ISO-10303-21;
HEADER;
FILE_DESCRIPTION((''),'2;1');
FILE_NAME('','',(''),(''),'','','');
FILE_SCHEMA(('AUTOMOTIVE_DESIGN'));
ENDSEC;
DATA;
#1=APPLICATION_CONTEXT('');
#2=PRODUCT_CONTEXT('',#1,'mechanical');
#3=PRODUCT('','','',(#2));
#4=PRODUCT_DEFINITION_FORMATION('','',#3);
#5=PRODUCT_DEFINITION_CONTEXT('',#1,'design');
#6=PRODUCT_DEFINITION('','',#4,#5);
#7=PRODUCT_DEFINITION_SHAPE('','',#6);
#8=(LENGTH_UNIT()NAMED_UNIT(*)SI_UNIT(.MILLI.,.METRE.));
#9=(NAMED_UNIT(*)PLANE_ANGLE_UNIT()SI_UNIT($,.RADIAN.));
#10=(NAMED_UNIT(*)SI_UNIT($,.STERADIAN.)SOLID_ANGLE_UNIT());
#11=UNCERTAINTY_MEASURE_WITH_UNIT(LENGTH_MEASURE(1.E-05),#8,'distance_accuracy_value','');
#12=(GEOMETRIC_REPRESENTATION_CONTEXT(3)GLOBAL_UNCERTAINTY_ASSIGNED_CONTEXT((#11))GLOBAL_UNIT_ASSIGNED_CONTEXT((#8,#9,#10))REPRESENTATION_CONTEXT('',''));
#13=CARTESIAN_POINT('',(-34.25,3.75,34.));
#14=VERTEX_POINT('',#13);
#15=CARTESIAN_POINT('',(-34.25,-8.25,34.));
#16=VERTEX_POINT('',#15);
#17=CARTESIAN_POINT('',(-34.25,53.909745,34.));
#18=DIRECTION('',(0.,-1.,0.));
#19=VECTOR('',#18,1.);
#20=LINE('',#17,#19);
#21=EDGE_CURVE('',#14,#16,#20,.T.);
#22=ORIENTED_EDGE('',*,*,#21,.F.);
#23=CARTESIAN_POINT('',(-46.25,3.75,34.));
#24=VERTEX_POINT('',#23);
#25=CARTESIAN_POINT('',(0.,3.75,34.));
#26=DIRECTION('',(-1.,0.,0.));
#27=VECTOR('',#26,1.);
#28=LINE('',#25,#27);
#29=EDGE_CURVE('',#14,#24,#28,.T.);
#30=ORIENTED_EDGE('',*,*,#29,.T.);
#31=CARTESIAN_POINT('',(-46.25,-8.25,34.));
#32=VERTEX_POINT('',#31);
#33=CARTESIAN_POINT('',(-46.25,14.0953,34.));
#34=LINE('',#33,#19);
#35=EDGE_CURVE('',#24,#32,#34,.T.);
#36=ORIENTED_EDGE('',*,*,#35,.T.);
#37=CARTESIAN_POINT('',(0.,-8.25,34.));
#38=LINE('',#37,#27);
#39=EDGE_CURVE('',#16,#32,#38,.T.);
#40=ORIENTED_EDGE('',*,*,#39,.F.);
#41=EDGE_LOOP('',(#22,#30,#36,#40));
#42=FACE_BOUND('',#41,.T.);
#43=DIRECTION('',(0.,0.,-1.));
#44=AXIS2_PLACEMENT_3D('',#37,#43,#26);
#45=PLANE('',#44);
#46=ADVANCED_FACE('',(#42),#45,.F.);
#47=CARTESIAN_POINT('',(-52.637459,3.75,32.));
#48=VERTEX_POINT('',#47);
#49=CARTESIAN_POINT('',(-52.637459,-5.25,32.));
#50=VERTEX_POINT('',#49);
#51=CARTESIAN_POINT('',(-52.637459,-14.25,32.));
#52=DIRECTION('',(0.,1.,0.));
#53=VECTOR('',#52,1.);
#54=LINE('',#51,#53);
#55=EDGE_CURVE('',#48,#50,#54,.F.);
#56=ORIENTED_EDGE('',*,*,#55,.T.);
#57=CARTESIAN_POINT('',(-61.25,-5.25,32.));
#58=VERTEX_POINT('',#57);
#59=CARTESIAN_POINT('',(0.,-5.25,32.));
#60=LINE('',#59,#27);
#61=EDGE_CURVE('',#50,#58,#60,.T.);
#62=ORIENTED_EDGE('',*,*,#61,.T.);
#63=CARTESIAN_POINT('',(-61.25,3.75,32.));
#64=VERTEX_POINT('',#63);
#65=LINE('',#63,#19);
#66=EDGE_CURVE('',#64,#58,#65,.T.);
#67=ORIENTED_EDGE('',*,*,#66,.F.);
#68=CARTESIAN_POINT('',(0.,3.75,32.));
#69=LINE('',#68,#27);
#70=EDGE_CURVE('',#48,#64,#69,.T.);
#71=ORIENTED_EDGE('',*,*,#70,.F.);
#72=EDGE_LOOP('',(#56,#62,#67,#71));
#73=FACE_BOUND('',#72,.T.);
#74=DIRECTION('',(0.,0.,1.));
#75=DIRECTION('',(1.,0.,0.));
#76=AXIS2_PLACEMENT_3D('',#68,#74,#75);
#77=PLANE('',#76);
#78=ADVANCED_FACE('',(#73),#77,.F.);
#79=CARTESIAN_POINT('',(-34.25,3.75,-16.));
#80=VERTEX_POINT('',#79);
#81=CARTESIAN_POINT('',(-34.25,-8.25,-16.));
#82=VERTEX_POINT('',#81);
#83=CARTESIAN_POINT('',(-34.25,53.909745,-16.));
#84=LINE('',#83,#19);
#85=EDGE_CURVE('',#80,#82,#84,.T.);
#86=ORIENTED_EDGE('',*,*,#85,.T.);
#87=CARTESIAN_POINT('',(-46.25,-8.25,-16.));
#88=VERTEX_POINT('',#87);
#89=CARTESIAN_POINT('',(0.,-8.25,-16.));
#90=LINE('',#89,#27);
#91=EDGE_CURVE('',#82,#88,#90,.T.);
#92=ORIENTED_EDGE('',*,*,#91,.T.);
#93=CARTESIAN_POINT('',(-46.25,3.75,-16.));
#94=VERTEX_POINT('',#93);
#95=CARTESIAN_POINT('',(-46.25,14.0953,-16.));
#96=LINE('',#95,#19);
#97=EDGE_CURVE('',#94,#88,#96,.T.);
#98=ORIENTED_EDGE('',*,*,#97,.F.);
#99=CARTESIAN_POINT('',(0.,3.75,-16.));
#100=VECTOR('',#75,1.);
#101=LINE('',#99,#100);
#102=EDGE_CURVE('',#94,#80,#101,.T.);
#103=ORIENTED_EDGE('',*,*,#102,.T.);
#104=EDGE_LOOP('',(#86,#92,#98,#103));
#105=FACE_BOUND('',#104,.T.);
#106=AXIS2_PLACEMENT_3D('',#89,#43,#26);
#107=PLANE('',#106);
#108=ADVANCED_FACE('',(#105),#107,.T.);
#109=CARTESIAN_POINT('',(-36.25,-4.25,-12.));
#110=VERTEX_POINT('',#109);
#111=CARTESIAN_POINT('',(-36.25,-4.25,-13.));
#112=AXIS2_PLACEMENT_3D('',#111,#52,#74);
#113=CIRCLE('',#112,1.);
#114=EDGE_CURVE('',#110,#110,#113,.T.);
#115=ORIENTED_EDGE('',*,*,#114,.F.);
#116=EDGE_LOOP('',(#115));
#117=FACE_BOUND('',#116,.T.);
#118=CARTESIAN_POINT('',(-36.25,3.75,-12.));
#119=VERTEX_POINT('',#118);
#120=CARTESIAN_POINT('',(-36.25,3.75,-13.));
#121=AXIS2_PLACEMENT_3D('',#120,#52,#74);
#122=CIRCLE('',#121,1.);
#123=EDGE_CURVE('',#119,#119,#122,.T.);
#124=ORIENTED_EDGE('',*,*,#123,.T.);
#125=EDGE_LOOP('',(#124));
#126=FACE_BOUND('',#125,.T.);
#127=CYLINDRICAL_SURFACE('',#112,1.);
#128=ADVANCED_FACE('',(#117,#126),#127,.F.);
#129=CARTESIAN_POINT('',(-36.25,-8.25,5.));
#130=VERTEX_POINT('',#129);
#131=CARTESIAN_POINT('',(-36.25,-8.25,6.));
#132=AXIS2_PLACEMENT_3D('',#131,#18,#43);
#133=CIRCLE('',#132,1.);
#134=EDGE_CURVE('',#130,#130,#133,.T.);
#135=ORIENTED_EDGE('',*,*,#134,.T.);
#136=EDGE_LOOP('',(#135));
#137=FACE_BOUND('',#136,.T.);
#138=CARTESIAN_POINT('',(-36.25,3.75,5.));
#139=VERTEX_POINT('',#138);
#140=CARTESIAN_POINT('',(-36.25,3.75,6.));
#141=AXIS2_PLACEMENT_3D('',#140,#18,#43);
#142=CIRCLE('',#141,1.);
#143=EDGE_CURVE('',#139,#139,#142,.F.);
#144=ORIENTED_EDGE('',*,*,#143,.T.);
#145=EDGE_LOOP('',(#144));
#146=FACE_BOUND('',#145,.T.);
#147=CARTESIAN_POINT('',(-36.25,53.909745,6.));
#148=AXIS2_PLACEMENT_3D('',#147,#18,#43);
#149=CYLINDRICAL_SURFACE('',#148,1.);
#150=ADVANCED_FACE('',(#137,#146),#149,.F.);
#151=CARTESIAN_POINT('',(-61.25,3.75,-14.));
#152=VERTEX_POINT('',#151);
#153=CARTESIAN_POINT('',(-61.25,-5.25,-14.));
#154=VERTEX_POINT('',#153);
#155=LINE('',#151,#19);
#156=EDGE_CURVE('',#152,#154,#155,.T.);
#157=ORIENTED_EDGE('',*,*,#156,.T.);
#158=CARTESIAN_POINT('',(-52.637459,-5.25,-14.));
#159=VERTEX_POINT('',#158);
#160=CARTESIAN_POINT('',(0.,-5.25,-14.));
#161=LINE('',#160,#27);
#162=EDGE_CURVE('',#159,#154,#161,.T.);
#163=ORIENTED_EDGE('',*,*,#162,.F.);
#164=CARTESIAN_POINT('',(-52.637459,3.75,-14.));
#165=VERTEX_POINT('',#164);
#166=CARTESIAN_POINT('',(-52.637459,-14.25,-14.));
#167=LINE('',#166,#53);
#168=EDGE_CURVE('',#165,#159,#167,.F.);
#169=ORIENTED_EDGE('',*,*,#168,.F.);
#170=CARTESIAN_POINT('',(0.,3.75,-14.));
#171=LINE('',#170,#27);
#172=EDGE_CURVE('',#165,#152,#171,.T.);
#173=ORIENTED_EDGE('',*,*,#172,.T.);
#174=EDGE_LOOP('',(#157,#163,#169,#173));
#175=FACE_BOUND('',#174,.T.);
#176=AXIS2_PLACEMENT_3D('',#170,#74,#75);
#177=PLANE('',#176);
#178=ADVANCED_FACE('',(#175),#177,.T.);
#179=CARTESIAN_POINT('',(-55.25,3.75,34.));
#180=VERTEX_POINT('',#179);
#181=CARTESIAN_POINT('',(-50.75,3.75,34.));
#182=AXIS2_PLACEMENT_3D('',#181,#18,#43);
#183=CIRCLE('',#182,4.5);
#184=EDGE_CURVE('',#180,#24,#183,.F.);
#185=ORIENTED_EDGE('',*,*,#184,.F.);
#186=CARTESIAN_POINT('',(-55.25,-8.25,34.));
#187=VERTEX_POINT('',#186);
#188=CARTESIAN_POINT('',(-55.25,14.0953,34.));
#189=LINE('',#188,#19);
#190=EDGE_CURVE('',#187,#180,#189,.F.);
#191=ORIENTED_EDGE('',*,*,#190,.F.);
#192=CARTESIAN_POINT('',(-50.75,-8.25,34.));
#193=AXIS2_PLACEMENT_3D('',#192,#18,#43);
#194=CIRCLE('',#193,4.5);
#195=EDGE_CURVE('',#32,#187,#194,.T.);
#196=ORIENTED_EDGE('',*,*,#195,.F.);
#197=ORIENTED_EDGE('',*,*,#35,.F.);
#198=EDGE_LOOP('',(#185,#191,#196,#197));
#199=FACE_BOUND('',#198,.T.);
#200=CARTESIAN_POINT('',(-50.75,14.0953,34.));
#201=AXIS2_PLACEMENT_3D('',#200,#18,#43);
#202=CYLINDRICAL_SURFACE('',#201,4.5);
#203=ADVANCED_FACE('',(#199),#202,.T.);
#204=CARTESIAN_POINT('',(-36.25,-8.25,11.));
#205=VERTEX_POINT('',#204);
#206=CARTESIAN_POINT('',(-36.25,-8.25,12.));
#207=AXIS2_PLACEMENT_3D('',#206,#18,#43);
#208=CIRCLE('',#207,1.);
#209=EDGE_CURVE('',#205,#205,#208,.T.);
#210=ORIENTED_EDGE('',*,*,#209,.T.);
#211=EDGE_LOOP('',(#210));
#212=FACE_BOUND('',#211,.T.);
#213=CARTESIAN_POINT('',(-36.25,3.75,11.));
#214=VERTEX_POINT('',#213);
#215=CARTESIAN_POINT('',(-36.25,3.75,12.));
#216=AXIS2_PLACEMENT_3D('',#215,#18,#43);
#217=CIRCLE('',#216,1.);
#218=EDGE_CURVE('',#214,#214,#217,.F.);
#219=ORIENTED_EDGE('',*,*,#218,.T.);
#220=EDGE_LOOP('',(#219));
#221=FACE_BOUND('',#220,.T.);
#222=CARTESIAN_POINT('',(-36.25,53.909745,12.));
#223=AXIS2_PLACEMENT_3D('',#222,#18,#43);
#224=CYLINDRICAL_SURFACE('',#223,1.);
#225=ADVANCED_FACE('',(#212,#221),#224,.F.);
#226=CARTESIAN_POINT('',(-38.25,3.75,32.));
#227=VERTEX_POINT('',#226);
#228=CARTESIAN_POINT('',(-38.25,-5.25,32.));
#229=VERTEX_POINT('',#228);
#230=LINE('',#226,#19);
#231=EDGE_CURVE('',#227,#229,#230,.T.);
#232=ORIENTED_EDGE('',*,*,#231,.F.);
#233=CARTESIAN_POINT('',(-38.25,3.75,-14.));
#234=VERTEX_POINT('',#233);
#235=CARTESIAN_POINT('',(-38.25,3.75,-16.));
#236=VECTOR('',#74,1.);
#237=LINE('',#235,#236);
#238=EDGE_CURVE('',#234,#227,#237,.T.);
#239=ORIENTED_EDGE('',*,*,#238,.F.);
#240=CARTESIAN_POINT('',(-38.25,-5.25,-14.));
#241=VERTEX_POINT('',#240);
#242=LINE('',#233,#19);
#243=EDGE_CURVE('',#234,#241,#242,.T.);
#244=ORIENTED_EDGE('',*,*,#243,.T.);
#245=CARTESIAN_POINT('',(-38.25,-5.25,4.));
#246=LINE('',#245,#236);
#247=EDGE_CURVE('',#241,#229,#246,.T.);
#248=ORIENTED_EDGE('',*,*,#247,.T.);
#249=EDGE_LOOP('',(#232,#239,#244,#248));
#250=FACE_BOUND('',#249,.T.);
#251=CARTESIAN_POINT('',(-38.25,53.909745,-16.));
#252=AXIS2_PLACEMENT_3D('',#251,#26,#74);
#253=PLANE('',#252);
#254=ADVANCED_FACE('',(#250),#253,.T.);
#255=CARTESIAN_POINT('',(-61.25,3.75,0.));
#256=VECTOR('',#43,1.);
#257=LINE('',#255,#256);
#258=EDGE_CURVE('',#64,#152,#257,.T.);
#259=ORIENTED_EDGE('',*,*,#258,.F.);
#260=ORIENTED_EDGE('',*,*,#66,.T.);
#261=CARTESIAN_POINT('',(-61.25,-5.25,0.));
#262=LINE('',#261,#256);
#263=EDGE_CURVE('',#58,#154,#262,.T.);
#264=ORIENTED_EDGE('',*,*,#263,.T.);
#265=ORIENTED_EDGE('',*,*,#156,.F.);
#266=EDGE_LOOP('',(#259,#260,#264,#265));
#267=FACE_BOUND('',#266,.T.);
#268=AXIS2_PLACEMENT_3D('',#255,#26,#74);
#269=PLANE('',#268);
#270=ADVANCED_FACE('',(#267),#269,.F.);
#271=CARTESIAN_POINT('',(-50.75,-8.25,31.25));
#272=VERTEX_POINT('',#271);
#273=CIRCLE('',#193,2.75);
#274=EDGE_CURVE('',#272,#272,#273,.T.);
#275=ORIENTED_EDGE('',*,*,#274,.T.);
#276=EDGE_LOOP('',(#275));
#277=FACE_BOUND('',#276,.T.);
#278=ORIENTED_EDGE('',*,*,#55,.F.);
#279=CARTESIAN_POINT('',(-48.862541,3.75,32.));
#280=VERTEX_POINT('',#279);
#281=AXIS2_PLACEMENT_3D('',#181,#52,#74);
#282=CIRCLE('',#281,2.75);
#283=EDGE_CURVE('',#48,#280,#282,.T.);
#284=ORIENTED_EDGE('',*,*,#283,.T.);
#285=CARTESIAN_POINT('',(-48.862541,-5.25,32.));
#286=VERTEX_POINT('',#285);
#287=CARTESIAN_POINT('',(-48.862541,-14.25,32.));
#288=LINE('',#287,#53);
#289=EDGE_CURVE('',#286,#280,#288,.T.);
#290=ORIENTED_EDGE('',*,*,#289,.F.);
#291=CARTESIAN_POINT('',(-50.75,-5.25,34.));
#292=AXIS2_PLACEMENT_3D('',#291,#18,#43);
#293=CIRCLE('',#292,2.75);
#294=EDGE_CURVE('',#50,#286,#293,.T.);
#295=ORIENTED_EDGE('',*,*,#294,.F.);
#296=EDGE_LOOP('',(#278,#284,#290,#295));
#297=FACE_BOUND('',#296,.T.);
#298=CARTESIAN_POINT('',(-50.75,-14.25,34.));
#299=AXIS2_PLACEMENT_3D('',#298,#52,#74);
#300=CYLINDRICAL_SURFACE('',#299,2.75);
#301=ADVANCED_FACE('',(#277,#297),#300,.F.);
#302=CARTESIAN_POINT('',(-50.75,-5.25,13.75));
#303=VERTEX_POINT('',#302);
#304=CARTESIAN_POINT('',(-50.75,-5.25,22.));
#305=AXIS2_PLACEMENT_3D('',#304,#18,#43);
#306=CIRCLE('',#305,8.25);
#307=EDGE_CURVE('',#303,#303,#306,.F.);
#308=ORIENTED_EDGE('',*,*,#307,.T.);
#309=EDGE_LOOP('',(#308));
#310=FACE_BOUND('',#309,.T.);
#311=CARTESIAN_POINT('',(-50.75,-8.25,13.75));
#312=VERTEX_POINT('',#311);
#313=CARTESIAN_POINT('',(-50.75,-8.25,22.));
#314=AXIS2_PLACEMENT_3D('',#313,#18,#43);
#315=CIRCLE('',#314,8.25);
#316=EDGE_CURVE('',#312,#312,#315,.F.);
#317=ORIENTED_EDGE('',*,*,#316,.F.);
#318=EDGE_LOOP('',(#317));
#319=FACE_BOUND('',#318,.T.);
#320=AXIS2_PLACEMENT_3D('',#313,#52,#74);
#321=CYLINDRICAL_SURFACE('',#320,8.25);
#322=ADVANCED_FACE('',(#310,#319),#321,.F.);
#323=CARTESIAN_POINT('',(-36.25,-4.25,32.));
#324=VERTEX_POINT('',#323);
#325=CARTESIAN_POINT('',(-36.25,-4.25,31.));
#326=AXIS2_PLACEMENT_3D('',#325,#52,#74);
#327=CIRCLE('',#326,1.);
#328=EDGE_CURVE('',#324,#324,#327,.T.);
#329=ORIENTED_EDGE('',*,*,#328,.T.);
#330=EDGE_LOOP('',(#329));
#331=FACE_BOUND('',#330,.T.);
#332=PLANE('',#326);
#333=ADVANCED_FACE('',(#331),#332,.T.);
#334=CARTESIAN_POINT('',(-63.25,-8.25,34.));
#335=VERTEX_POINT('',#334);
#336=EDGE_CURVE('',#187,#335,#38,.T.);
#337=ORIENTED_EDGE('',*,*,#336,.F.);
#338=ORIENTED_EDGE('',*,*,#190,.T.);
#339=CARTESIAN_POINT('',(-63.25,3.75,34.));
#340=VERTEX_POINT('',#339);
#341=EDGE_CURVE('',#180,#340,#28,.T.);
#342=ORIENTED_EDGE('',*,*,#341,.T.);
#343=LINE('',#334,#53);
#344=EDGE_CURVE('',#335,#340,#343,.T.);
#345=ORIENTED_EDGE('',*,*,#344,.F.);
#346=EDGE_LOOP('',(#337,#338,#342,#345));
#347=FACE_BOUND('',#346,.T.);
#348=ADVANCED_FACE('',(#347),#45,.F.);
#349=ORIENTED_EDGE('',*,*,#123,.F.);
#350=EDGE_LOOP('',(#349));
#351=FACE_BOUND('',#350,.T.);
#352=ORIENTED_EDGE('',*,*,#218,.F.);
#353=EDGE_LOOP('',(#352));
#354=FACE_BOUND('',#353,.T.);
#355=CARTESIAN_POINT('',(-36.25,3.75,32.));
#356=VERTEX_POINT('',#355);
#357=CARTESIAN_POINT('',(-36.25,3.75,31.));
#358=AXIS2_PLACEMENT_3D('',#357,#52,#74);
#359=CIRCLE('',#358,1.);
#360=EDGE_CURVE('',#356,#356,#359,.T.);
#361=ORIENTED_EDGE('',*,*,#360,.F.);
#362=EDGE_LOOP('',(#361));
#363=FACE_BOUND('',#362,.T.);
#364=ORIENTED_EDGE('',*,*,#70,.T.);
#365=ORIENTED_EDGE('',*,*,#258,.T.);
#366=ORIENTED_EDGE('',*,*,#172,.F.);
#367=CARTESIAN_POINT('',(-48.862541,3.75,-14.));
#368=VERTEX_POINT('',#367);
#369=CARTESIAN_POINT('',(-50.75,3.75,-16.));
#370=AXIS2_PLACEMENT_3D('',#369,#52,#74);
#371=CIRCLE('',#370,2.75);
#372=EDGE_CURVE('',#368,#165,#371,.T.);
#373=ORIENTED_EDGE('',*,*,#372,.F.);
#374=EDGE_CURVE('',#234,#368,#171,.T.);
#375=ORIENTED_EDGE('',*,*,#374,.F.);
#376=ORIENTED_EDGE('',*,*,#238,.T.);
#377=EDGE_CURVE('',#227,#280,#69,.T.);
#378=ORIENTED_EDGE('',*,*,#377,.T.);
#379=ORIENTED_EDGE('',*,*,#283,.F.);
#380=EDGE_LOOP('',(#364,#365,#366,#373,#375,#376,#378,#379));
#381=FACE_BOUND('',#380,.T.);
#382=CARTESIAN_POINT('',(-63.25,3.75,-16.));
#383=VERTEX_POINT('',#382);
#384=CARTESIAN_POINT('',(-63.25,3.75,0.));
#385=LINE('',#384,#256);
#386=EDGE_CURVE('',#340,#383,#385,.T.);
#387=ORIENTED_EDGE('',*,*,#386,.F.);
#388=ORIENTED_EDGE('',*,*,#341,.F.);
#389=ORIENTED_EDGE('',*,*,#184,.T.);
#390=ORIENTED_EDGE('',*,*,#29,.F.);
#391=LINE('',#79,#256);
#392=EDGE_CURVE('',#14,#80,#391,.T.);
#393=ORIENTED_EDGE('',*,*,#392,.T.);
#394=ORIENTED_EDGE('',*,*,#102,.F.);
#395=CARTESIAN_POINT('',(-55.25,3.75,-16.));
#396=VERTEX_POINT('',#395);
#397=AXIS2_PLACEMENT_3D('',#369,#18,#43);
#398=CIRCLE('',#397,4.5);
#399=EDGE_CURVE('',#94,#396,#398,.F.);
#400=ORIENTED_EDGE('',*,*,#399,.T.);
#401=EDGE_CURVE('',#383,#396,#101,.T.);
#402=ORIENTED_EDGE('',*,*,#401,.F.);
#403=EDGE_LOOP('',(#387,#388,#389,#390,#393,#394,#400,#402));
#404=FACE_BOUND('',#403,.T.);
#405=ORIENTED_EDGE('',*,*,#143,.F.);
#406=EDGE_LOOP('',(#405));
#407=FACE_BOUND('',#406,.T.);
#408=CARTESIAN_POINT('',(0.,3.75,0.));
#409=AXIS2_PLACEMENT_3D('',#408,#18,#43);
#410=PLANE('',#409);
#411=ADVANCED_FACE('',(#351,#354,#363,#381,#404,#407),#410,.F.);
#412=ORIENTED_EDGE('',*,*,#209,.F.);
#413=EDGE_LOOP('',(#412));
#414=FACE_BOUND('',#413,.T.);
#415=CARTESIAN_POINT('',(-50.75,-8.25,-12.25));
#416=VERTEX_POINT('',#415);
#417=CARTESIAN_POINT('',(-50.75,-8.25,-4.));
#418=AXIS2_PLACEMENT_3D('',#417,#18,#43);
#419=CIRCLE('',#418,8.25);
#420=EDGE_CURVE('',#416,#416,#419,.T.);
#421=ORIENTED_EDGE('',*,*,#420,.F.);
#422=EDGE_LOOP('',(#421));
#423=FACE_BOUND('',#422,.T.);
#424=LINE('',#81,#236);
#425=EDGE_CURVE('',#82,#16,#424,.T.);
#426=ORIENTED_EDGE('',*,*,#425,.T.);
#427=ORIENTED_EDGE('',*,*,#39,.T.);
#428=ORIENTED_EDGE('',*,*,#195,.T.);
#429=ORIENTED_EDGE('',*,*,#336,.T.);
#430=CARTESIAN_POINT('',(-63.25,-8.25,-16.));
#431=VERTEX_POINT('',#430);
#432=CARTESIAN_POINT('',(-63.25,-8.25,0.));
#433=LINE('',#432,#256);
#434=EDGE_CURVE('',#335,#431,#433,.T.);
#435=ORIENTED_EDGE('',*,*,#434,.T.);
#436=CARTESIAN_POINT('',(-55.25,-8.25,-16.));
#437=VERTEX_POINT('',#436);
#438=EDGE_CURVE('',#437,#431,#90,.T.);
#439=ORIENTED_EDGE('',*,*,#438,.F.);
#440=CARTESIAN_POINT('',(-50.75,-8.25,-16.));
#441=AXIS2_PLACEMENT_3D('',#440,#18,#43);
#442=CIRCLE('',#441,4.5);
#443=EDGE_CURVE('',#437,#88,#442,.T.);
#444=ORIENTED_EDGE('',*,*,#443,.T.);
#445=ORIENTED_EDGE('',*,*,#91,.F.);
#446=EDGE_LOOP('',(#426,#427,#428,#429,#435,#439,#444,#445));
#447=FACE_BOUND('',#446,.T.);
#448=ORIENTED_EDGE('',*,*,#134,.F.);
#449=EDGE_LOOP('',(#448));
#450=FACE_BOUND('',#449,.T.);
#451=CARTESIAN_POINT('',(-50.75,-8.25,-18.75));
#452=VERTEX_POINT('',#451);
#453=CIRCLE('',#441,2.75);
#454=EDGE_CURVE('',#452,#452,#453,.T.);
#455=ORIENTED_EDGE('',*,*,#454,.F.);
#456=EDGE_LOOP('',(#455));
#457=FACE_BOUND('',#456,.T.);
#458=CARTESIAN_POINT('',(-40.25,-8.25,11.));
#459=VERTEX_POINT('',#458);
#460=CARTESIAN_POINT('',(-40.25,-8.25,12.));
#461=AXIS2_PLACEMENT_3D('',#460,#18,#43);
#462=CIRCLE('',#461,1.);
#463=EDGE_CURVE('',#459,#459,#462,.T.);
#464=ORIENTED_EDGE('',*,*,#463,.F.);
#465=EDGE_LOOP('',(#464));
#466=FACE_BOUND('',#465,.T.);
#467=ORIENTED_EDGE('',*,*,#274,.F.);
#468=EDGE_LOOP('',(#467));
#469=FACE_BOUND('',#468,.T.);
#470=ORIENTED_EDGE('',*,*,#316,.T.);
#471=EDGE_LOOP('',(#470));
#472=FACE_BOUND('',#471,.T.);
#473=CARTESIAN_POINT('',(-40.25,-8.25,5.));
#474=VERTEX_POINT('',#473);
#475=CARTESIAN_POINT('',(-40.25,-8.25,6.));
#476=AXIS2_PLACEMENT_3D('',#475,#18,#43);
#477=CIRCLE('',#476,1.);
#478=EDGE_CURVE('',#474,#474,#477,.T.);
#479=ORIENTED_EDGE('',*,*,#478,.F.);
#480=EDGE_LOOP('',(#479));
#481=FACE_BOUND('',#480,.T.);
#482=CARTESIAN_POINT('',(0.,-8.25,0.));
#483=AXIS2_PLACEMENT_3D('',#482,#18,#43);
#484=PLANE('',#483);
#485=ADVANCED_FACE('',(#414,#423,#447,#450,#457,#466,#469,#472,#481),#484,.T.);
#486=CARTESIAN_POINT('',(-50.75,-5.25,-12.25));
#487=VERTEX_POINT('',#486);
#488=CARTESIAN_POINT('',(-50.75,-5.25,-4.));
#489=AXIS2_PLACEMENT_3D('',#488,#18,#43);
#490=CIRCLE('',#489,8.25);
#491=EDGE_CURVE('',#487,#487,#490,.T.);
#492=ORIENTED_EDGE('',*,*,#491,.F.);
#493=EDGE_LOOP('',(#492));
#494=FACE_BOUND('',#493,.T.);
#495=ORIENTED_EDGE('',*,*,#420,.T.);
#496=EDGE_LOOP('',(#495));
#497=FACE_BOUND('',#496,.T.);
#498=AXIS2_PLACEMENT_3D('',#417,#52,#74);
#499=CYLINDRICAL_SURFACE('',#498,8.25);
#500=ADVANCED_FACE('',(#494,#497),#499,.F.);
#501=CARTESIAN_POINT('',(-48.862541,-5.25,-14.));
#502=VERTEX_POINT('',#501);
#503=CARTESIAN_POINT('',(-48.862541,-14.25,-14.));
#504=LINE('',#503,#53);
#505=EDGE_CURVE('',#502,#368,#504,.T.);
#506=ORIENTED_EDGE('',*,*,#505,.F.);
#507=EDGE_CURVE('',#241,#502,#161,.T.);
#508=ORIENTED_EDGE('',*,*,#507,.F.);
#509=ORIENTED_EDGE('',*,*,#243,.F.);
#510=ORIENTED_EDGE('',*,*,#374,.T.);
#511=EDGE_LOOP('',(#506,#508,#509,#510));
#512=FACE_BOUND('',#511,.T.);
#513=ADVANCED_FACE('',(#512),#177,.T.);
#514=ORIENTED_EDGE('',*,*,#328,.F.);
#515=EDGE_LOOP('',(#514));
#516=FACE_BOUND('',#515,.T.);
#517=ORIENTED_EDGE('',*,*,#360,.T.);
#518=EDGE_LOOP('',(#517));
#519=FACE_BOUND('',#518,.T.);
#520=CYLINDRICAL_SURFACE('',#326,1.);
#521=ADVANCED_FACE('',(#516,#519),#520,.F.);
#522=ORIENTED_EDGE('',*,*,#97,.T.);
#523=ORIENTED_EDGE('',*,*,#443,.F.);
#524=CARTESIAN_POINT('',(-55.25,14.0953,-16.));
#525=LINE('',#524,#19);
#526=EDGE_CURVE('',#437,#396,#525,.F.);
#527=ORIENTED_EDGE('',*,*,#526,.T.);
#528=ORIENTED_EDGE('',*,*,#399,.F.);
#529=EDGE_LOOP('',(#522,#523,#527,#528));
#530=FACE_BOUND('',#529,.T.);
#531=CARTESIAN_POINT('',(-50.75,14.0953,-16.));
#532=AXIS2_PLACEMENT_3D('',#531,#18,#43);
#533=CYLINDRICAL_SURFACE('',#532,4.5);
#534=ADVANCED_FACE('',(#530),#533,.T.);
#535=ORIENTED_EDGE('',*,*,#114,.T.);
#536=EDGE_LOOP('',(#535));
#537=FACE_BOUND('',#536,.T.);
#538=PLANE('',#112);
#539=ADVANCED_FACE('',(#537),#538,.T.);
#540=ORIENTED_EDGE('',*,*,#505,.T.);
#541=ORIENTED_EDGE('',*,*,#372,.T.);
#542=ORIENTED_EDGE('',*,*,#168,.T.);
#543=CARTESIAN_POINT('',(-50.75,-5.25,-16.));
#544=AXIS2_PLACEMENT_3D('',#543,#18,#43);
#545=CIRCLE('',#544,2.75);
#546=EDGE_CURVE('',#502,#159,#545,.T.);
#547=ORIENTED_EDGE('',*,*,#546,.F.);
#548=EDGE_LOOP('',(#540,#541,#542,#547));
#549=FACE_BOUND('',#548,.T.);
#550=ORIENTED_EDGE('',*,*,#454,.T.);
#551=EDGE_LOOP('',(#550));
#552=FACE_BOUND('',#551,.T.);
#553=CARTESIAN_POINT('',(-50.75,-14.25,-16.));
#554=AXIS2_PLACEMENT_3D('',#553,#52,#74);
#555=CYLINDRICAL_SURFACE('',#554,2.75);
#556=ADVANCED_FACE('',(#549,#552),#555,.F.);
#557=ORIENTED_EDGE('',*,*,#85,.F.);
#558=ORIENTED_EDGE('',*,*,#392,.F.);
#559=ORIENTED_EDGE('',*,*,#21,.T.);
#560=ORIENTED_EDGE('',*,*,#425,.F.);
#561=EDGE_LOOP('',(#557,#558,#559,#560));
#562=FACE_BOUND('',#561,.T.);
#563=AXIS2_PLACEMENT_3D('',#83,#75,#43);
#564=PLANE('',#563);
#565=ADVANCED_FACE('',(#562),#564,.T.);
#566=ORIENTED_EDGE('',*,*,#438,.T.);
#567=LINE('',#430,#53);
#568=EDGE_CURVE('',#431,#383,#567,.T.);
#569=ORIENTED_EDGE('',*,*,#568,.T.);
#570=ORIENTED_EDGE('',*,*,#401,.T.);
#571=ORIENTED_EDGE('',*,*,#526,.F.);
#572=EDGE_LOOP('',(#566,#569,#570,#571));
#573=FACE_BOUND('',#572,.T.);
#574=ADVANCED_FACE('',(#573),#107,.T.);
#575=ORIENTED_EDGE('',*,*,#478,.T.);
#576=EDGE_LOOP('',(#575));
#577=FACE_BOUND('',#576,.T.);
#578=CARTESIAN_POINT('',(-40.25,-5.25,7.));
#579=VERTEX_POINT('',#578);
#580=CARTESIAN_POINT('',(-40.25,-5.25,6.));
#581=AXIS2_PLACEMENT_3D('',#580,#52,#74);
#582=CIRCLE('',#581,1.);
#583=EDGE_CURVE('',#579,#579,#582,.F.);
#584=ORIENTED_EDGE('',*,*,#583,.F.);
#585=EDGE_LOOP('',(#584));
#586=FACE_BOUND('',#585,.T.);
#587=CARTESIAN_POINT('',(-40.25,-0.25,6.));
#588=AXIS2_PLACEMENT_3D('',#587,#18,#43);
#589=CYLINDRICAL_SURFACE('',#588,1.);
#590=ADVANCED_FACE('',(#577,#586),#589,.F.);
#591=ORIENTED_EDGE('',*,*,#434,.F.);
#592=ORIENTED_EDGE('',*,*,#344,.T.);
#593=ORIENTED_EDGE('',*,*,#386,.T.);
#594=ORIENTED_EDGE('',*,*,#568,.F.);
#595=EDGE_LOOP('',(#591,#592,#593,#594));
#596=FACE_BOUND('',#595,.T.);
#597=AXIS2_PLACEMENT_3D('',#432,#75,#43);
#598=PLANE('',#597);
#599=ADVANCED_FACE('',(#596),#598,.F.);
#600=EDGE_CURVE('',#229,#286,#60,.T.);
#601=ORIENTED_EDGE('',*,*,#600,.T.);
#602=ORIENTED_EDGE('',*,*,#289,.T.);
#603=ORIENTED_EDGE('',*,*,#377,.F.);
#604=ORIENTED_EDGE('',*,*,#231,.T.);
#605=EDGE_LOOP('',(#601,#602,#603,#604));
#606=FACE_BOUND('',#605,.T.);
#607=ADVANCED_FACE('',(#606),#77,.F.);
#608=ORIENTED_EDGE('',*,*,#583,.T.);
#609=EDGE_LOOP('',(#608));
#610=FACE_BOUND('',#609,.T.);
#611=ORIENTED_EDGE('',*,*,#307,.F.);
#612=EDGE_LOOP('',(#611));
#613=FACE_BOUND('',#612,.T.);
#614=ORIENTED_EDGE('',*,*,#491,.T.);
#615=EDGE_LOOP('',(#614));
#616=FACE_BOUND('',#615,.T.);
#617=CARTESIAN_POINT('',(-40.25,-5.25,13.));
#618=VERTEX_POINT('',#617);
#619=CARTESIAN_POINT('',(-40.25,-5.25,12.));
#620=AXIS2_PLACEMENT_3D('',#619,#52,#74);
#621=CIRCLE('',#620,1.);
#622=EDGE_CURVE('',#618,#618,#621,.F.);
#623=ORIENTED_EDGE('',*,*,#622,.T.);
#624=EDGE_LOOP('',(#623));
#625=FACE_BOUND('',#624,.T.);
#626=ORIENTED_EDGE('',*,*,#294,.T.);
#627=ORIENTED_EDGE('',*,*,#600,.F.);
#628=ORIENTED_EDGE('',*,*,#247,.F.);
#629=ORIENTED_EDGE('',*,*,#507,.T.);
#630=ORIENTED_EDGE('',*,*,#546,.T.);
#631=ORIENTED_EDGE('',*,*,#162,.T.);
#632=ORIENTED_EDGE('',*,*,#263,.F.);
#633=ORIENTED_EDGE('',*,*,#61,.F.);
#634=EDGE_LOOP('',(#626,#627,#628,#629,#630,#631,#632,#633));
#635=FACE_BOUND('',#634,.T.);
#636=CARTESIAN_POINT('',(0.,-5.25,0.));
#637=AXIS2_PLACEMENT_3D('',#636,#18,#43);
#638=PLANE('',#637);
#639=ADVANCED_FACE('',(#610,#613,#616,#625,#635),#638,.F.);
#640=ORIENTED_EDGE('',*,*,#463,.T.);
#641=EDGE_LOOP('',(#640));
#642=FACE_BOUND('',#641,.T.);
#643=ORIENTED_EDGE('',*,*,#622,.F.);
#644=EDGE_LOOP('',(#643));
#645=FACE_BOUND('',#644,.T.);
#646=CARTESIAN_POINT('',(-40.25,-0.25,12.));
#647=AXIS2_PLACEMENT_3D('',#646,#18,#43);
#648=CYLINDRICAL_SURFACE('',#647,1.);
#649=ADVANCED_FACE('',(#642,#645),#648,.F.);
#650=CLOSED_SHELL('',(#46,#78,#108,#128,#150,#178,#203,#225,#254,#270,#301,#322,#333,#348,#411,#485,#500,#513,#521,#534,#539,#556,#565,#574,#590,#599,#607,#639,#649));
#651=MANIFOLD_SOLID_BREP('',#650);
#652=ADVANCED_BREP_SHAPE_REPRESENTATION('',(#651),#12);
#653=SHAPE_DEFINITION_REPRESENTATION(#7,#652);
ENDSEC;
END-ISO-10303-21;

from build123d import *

# Parameters (mm, degrees)
BOSS_EXTRUDE1_DEPTH      = 2
BOSS_EXTRUDE2_DEPTH      = 1
SKETCH3_R                = 1
CUT_EXTRUDE1_DEPTH       = 1
BOSS_EXTRUDE3_DEPTH      = 2
BOSS_EXTRUDE3_DEPTH_BACK = 1
BOSS_EXTRUDE4_START      = -3
BOSS_EXTRUDE4_OUTLINE_R  = 1
BOSS_EXTRUDE4_DEPTH      = 3
SKETCH6_R                = 3.500627768
BOSS_EXTRUDE5_DEPTH      = 3
BOSS_EXTRUDE6_DEPTH      = 3
CUT_EXTRUDE2_DEPTH       = 15
FILLET1_R                = 20
FILLET2_R                = 3
FILLET3_R                = 3
SKETCH9_R                = 1
CUT_EXTRUDE3_DEPTH       = 15
CUT_EXTRUDE4_DEPTH       = 1.5
FILLET4_R                = 8
FILLET5_R                = 2
SKETCH11_W               = 110.258684369
SKETCH11_H               = 6.064888907
CUT_EXTRUDE5_DEPTH       = 38
SKETCH12_R               = 18.613151801
CUT_EXTRUDE6_DEPTH       = 29
SKETCH13_W               = 77.706478895
SKETCH13_H               = 41.021519778
CUT_EXTRUDE7_DEPTH       = 1
FILLET6_START            = -4.447684996
FILLET6_DEPTH            = 2
FILLET6_START_2          = 2.447684996
FILLET6_2_DEPTH          = 2
FILLET6_START_3          = -1
FILLET6_3_DEPTH          = 1
FILLET6_START_4          = -2.447684996
FILLET6_4_DEPTH          = 4.895369992
CUT_EXTRUDE8_DEPTH       = 37
CUT_EXTRUDE8_DEPTH_BACK  = 10
SKETCH14_W               = 81.474605317
SKETCH14_H               = 77.503756956
BOSS_EXTRUDE7_DEPTH      = 2
BOSS_EXTRUDE7_DEPTH_BACK = 1
BOSS_EXTRUDE8_DEPTH      = 8
BOSS_EXTRUDE8_DEPTH_BACK = 3
SKETCH16_W               = 2
SKETCH16_H               = 10.5
BOSS_EXTRUDE9_DEPTH      = 10.5
FILLET7_R                = 10
SKETCH18_W               = 1.521986252
SKETCH18_H               = 3
BOSS_EXTRUDE10_DEPTH     = 10.5
FILLET8_R                = 2
SKETCH19_W               = 25
SKETCH19_H               = 2
BOSS_EXTRUDE11_DEPTH     = 10.5
SKETCH20_W               = 4
SKETCH20_H               = 10
SKETCH20_R               = 1
BOSS_EXTRUDE12_DEPTH     = 5
FILLET9_R                = 2
FILLET10_R               = 2
FILLET11_R               = 2
SKETCH21_R               = 8.25
BOSS_EXTRUDE13_DEPTH     = 3
BOSS_EXTRUDE14_START     = 3
SKETCH23_W               = 4
SKETCH23_H               = 10
SKETCH23_R               = 1
BOSS_EXTRUDE14_DEPTH     = 3
SKETCH25_R               = 50.400338574
CUT_EXTRUDE9_DEPTH       = 20
BOSS_EXTRUDE15_DEPTH     = 12
SKETCH27_W               = 4
SKETCH27_H               = 50
SKETCH27_R               = 1
BOSS_EXTRUDE16_DEPTH     = 12
SKETCH28_R               = 2.5
CUT_EXTRUDE10_DEPTH      = 18
BOSS_EXTRUDE17_DEPTH     = 12
SKETCH30_R               = 2.75
CUT_EXTRUDE11_DEPTH      = 18
SKETCH31_R               = 1
CUT_EXTRUDE12_DEPTH      = 8


with BuildPart() as part:
    # Sketch1 → Boss-Extrude1 (new body)
    with BuildSketch(Plane.XY):
        with BuildLine():
            Line((14.458185053, 3.677415528), (0.579181495, 5.217954465))
            ThreePointArc((0.579181495, 5.217954465), (-5.25, 0), (0.579181495, -5.217954465))
            Line((0.579181495, -5.217954465), (14.458185053, -3.677415528))
            ThreePointArc((14.458185053, -3.677415528), (17.75, 0), (14.458185053, 3.677415528))
        make_face()
        with BuildLine():
            Line((14.292704626, 2.186571395), (0.413701068, 3.727110332))
            ThreePointArc((0.413701068, 3.727110332), (-3.75, 0), (0.413701068, -3.727110332))
            Line((0.413701068, -3.727110332), (14.292704626, -2.186571395))
            ThreePointArc((14.292704626, -2.186571395), (16.25, 0), (14.292704626, 2.186571395))
        make_face(mode=Mode.SUBTRACT)
    extrude(amount=BOSS_EXTRUDE1_DEPTH)

    # Sketch2 → Boss-Extrude2 (add)
    with BuildSketch(Plane.XY.offset(2)):
        with BuildLine():
            Line((14.458185053, 3.677415528), (0.579181495, 5.217954465))
            ThreePointArc((0.579181495, 5.217954465), (-5.25, 0), (0.579181495, -5.217954465))
            Line((0.579181495, -5.217954465), (14.458185053, -3.677415528))
            ThreePointArc((14.458185053, -3.677415528), (17.75, 0), (14.458185053, 3.677415528))
        make_face()
    extrude(amount=BOSS_EXTRUDE2_DEPTH)

    # Sketch3 → Cut-Extrude1 (cut)
    with BuildSketch(Plane.XY.offset(3)):
        Circle(SKETCH3_R)
    extrude(amount=-CUT_EXTRUDE1_DEPTH, mode=Mode.SUBTRACT)

    # Sketch4 → Boss-Extrude3 (add, two sides: drawn at the far end of the back side and taken through both)
    with BuildSketch(Plane(origin=(0, 0, 2), x_dir=(-1, 0, 0), z_dir=(0, 0, -1)).offset(-BOSS_EXTRUDE3_DEPTH_BACK)):
        with BuildLine():
            Line((-15.26072202, 2.426182253), (-7.518683274, 4.447684996))
            Line((-7.518683274, 4.447684996), (-42.518683274, 4.447684996))
            ThreePointArc((-42.518683274, 4.447684996), (-39.373695053, 3.144988221), (-38.070998278, 0))
            ThreePointArc((-38.070998278, 0), (-39.373695053, -3.144988221), (-42.518683274, -4.447684996))
            Line((-42.518683274, -4.447684996), (-7.518683274, -4.447684996))
            Line((-7.518683274, -4.447684996), (-13.862339481, -2.595687971))
            Line((-13.862339481, -2.595687971), (-16.213670101, -1.84565397))
            Line((-16.213670101, -1.84565397), (-17.166618181, 0))
            Line((-17.166618181, 0), (-15.26072202, 2.426182253))
        make_face()
        with BuildLine():
            ThreePointArc((-38.070998278, 0), (-39.373695053, 3.144988221), (-42.518683274, 4.447684996))
            Line((-42.518683274, 4.447684996), (-42.518683274, 2))
            ThreePointArc((-42.518683274, 2), (-41.104469712, 1.414213562), (-40.518683274, 0))
            ThreePointArc((-40.518683274, 0), (-41.104469712, -1.414213562), (-42.518683274, -2))
            Line((-42.518683274, -2), (-42.518683274, -4.447684996))
            ThreePointArc((-42.518683274, -4.447684996), (-39.373695053, -3.144988221), (-38.070998278, 0))
        make_face()
        with BuildLine():
            Line((-42.518683274, 2), (-42.518683274, 4.447684996))
            ThreePointArc((-42.518683274, 4.447684996), (-46.96636827, 0), (-42.518683274, -4.447684996))
            Line((-42.518683274, -4.447684996), (-42.518683274, -2))
            ThreePointArc((-42.518683274, -2), (-44.518683274, 0), (-42.518683274, 2))
        make_face()
    extrude(amount=BOSS_EXTRUDE3_DEPTH + BOSS_EXTRUDE3_DEPTH_BACK)

    # Boss-Extrude4: read off the stored shape, not the designer's step
    # Boss-Extrude4 outline → Boss-Extrude4 (add)
    with BuildSketch(Plane(origin=(0, 0, 0), x_dir=(-1, 0, 0), z_dir=(0, 0, -1)).offset(BOSS_EXTRUDE4_START)):
        with BuildLine():
            ThreePointArc((-42.518683274, -4.447684996), (-46.96636827, 0), (-42.518683274, 4.447684996))
            Line((-42.518683274, 4.447684996), (-54.290526798, 4.447684996))
            ThreePointArc((-54.290526798, 4.447684996), (-59.289068337, 5.305033813), (-63.716210719, 7.779073998))
            ThreePointArc((-63.716210719, 7.779073998), (-80, 0), (-63.716210719, -7.779073998))
            ThreePointArc((-63.716210719, -7.779073998), (-59.289068337, -5.305033813), (-54.290526798, -4.447684996))
            Line((-54.290526798, -4.447684996), (-42.518683274, -4.447684996))
        make_face()
        with Locations((-68.205771366, -4.5)):
            Circle(BOSS_EXTRUDE4_OUTLINE_R, mode=Mode.SUBTRACT)
        with Locations((-76, 0)):
            Circle(BOSS_EXTRUDE4_OUTLINE_R, mode=Mode.SUBTRACT)
        with Locations((-68.205771366, 4.5)):
            Circle(BOSS_EXTRUDE4_OUTLINE_R, mode=Mode.SUBTRACT)
    extrude(amount=BOSS_EXTRUDE4_DEPTH)

    # Sketch6 → Boss-Extrude5 (add)
    with BuildSketch(Plane(origin=(0, 0, 0), x_dir=(-1, 0, 0), z_dir=(0, 0, -1))):
        with Locations((-42.518683274, 0)):
            Circle(SKETCH6_R)
    extrude(amount=-BOSS_EXTRUDE5_DEPTH)

    # Sketch7 → Boss-Extrude6 (add)
    with BuildSketch(Plane(origin=(0, 0, 0), x_dir=(-1, 0, 0), z_dir=(0, 0, -1))):
        Polygon((-54.290526798, 4.447684996), (-94.290526798, 4.447684996), (-94.290526798, -3.552315004), (-68.73970048, -3.552315004), (-92.931542949, -17.519481766), (-88.931542949, -24.447684996), (-54.290526798, -4.447684996), align=None)
    extrude(amount=-BOSS_EXTRUDE6_DEPTH)

    # Sketch8 → Cut-Extrude2 (cut)
    with BuildSketch(Plane(origin=(0, 0, 0), x_dir=(-1, 0, 0), z_dir=(0, 0, -1))):
        Polygon((-94.290526798, 4.447684996), (-45.837456427, 4.447684996), (-68.326886593, 15.265325323), align=None)
        Polygon((-94.290526798, -3.552315004), (-68.73970048, -3.552315004), (-92.931542949, -17.519481766), align=None)
    extrude(amount=-CUT_EXTRUDE2_DEPTH, mode=Mode.SUBTRACT)

    # Fillet1
    fillet1_edges = [part.edges().sort_by_distance(p)[0] for p in [
        (54.290526798, -4.447684996, 1.5),
    ]]
    fillet(fillet1_edges, radius=FILLET1_R)

    # Fillet2
    fillet2_edges = [part.edges().sort_by_distance(p)[0] for p in [
        (94.290526798, 4.447684996, 1.5),
        (94.290526798, -3.552315004, 1.5),
        (92.931542949, -17.519481766, 1.5),
        (88.931542949, -24.447684996, 1.5),
    ]]
    fillet(fillet2_edges, radius=FILLET2_R)

    # Fillet3
    fillet3_edges = [part.edges().sort_by_distance(p)[0] for p in [
        (68.73970048, -3.552315004, 1.5),
    ]]
    fillet(fillet3_edges, radius=FILLET3_R)

    # Sketch9 → Cut-Extrude3 (cut)
    with BuildSketch(Plane(origin=(0, 0, 0), x_dir=(-1, 0, 0), z_dir=(0, 0, -1))):
        with Locations((-89.290526798, 0.447684996)):
            Circle(SKETCH9_R)
        with Locations((-79.290526798, 0.447684996)):
            Circle(SKETCH9_R)
        with Locations((-77.941161892, -13.483583381)):
            Circle(SKETCH9_R)
        with Locations((-86.60141593, -18.483583381)):
            Circle(SKETCH9_R)
    extrude(amount=-CUT_EXTRUDE3_DEPTH, mode=Mode.SUBTRACT)

    # Sketch10 → Cut-Extrude4 (cut)
    with BuildSketch(Plane(origin=(0, 0, 0), x_dir=(-1, 0, 0), z_dir=(0, 0, -1))):
        with BuildLine():
            Line((-19.05, 2.447684996), (-67.154630008, 2.447684996))
            ThreePointArc((-67.154630008, 2.447684996), (-70.616179326, -5.909234314), (-62.259260015, -2.447684996))
            Line((-62.259260015, -2.447684996), (-19.05, -2.447684996))
            Line((-19.05, -2.447684996), (-19.05, 2.447684996))
        make_face()
    extrude(amount=-CUT_EXTRUDE4_DEPTH, mode=Mode.SUBTRACT)

    # Fillet4
    fillet4_edges = [part.edges().sort_by_distance(p)[0] for p in [
        (62.259260015, -2.447684996, 0.75),
    ]]
    fillet(fillet4_edges, radius=FILLET4_R)

    # Fillet5
    fillet5_edges = [part.edges().sort_by_distance(p)[0] for p in [
        (19.05, 2.447684996, 0.75),
        (19.05, -2.447684996, 0.75),
    ]]
    fillet(fillet5_edges, radius=FILLET5_R)

    # Mirror1: part across plane


with BuildPart() as part_1:
    add(part.part)
    add(part.part.mirror(Plane(origin=(14.05, 0, 0), x_dir=(1, 0, 0), z_dir=(0, 0, 1))))

    # Sketch11 → Cut-Extrude5 (cut)
    with BuildSketch(Plane(origin=(0, 4.447684996, 0), x_dir=(1, 0, 0), z_dir=(0, 1, 0))):
        with Locations((47.771534573, -3.032444454)):
            Rectangle(SKETCH11_W, SKETCH11_H)
    extrude(amount=-CUT_EXTRUDE5_DEPTH, mode=Mode.SUBTRACT)

    # Sketch12 → Cut-Extrude6 (cut)
    with BuildSketch(Plane.XY):
        with Locations((7.534351793, 3.599902348)):
            Circle(SKETCH12_R)
    extrude(amount=CUT_EXTRUDE6_DEPTH, mode=Mode.SUBTRACT)

    # Sketch13 → Cut-Extrude7 (cut)
    with BuildSketch(Plane.XY):
        with Locations((57.903239447, -8.718962854)):
            Rectangle(SKETCH13_W, SKETCH13_H)
    extrude(amount=-CUT_EXTRUDE7_DEPTH, mode=Mode.SUBTRACT)

    # Fillet6: read off the stored shape, not the designer's step
    # Fillet6 outline → Fillet6 (add)
    with BuildSketch(Plane(origin=(0, 0, 0), x_dir=(1, 0, 0), z_dir=(0, 1, 0)).offset(FILLET6_START)):
        with BuildLine():
            Line((19.05, 1), (19.049997006, -1.45e-06))
            ThreePointArc((19.049997006, -1.45e-06), (21.172829345, 0.746793973), (23.408898944, 1))
            Line((23.408898944, 1), (19.05, 1))
        make_face()
    extrude(amount=FILLET6_DEPTH)

    # Fillet6 2 outline → Fillet6 2 (add)
    with BuildSketch(Plane(origin=(0, 0, 0), x_dir=(1, 0, 0), z_dir=(0, 1, 0)).offset(FILLET6_START_2)):
        with BuildLine():
            Line((19.05, 1), (19.049997006, -1.45e-06))
            ThreePointArc((19.049997006, -1.45e-06), (21.172829345, 0.746793973), (23.408898944, 1))
            Line((23.408898944, 1), (19.05, 1))
        make_face()
    extrude(amount=FILLET6_2_DEPTH)

    # Fillet6 3 outline → Fillet6 3 (add)
    with BuildSketch(Plane.XY.offset(FILLET6_START_3)):
        with BuildLine():
            Line((19.05, 2.447684996), (19.05, 0.447684996))
            ThreePointArc((19.05, 0.447684996), (19.635786438, 1.861898559), (21.05, 2.447684996))
            Line((21.05, 2.447684996), (19.05, 2.447684996))
        make_face()
        with BuildLine():
            ThreePointArc((21.05, -2.447684996), (19.635786438, -1.861898559), (19.05, -0.447684996))
            Line((19.05, -0.447684996), (19.05, -2.447684996))
            Line((19.05, -2.447684996), (21.05, -2.447684996))
        make_face()
    extrude(amount=FILLET6_3_DEPTH)

    # Fillet6 4 outline → Fillet6 4 (cut)
    with BuildSketch(Plane(origin=(0, 0, 0), x_dir=(1, 0, 0), z_dir=(0, 1, 0)).offset(FILLET6_START_4)):
        with BuildLine():
            ThreePointArc((23, 0.991636585), (20.973982557, 0.699029961), (19.049997006, -1.45e-06))
            Line((19.049997006, -1.45e-06), (18, -0.508538641))
            Line((18, -0.508538641), (18, -1))
            Line((18, -1), (23, -1))
            Line((23, -1), (23, 0.991636585))
        make_face()
    extrude(amount=FILLET6_4_DEPTH, mode=Mode.SUBTRACT)

    # Sketch14 → Cut-Extrude8 (cut, two sides: drawn at the far end of the back side and taken through both)
    with BuildSketch(Plane.XY.offset(-2).offset(-CUT_EXTRUDE8_DEPTH_BACK)):
        with Locations((59.787302659, 4.447684996)):
            Rectangle(SKETCH14_W, SKETCH14_H)
    extrude(amount=CUT_EXTRUDE8_DEPTH + CUT_EXTRUDE8_DEPTH_BACK, mode=Mode.SUBTRACT)

    # Sketch15 → Boss-Extrude7 (add, two sides: drawn at the far end of the back side and taken through both)
    with BuildSketch(Plane.XY.offset(-2).offset(-BOSS_EXTRUDE7_DEPTH_BACK)):
        Polygon((0, 4.349044766), (-3.638836396, 3.035019198), (-4.3304288, -1.298959868), (-2.356179656, -4.022923876), (0, -4.398909991), (0, -5.25), (-7.25, -5.25), (-7.25, 5.25), (0, 5.25), align=None)
    extrude(amount=BOSS_EXTRUDE7_DEPTH + BOSS_EXTRUDE7_DEPTH_BACK)



with BuildPart() as body_2:
    # Sketch16 → Boss-Extrude8 (new, two sides: drawn at the far end of the back side and taken through both)
    with BuildSketch(Plane.XY.offset(-BOSS_EXTRUDE8_DEPTH_BACK)):
        with Locations((-8.25, 0)):
            Rectangle(SKETCH16_W, SKETCH16_H)
    extrude(amount=BOSS_EXTRUDE8_DEPTH + BOSS_EXTRUDE8_DEPTH_BACK)

    # Sketch17 → Boss-Extrude9 (add)
    with BuildSketch(Plane.XZ.offset(5.25)):
        Polygon((-9.25, 8), (-13.25, 10), (-13.25, 8), (-9.25, 6), align=None)
    extrude(amount=-BOSS_EXTRUDE9_DEPTH)

    # Fillet7
    # the kernel refuses this fillet: 10 mm, written as the material it adds along each edge
    with BuildSketch(Plane(origin=(-9.25, -5.25, 6), x_dir=(0, 0, -1), z_dir=(0, 1, 0))) as fillet7_piece_1:
        with BuildLine():
            CenterArc((6, 10), FILLET7_R, 216.869897646, 53.130102354)
            Line((-2, 4), (-2.16, 3.88))
            ThreePointArc((-2.16, 3.88), (-1.178885438, 1.910557281), (-0.178885438, -0.089442719))
            Line((-0.178885438, -0.089442719), (0, -0.2))
            Line((0, -0.2), (6, -0.2))
            Line((6, -0.2), (6, 0))
        make_face()
    extrude(amount=10.5)


with BuildPart() as part_2:
    add(part_1.part)

    add(body_2.part)  # Boss-Extrude10 merges body 2
    # Sketch18 → Boss-Extrude10 (add)
    with BuildSketch(Plane.XZ.offset(5.25)):
        with Locations((-7.358034117, -1.5)):
            Rectangle(SKETCH18_W, SKETCH18_H)
    extrude(amount=-BOSS_EXTRUDE10_DEPTH)

    # Fillet8
    fillet8_edges = [part_2.edges().sort_by_distance(p)[0] for p in [
        (-7.25, 0, 0),
    ]]
    fillet(fillet8_edges, radius=FILLET8_R)

    # Sketch19 → Boss-Extrude11 (add)
    with BuildSketch(Plane.XZ.offset(5.25)):
        with Locations((-25.75, 9)):
            Rectangle(SKETCH19_W, SKETCH19_H)
    extrude(amount=-BOSS_EXTRUDE11_DEPTH)

    # Sketch20 → Boss-Extrude12 (add)
    with BuildSketch(Plane.XZ.offset(5.25)):
        with Locations((-40.25, 9)):
            Rectangle(SKETCH20_W, SKETCH20_H)
        with Locations(Location((-40.25, 6, 0), (0, 0, 270))):
            Circle(SKETCH20_R, mode=Mode.SUBTRACT)
        with Locations(Location((-40.25, 12, 0), (0, 0, 270))):
            Circle(SKETCH20_R, mode=Mode.SUBTRACT)
    extrude(amount=-BOSS_EXTRUDE12_DEPTH)

    # Fillet9
    fillet9_edges = [part_2.edges().sort_by_distance(p)[0] for p in [
        (-38.25, -2.75, 10),
        (-38.25, -2.75, 8),
    ]]
    fillet(fillet9_edges, radius=FILLET9_R)

    # Fillet10
    fillet10_edges = [part_2.edges().sort_by_distance(p)[0] for p in [
        (-7.25, 0, 8),
    ]]
    fillet(fillet10_edges, radius=FILLET10_R - 0.0001)  # a hair under: the kernel refuses the full size

    # Fillet11
    fillet11_edges = [part_2.edges().sort_by_distance(p)[0] for p in [
        (19.05, 4.447684996, -1.5),
        (19.05, -4.447684996, -1.5),
    ]]
    fillet(fillet11_edges, radius=FILLET11_R - 0.0001)  # a hair under: the kernel refuses the full size



with BuildPart() as body_2_2:
    # Sketch21 → Boss-Extrude13 (new body)
    with BuildSketch(Plane.XZ.offset(5.25)):
        Polygon((-38.25, 14), (-38.25, 34), (-63.25, 34), (-63.25, 9), (-63.25, -16), (-38.25, -16), (-38.25, 4), (-42.25, 4), (-42.25, 14), align=None)
        with Locations(Location((-50.75, -4, 0), (0, 0, 270))):
            Circle(SKETCH21_R, mode=Mode.SUBTRACT)
        with Locations(Location((-50.75, 22, 0), (0, 0, 270))):
            Circle(SKETCH21_R, mode=Mode.SUBTRACT)
    extrude(amount=BOSS_EXTRUDE13_DEPTH)


with BuildPart() as part_3:
    add(part_2.part)

    add(body_2_2.part)  # Boss-Extrude14 merges body 2 2
    # Sketch23 → Boss-Extrude14 (add)
    with BuildSketch(Plane.XZ.offset(5.25).offset(BOSS_EXTRUDE14_START)):
        with Locations((-40.25, 9)):
            Rectangle(SKETCH23_W, SKETCH23_H)
        with Locations(Location((-40.25, 6, 0), (0, 0, 270))):
            Circle(SKETCH23_R, mode=Mode.SUBTRACT)
        with Locations(Location((-40.25, 12, 0), (0, 0, 270))):
            Circle(SKETCH23_R, mode=Mode.SUBTRACT)
    extrude(amount=-BOSS_EXTRUDE14_DEPTH)

    # Sketch25 → Cut-Extrude9 (cut)
    with BuildSketch(Plane(origin=(0, -5.25, 0), x_dir=(1, 0, 0), z_dir=(0, 1, 0))):
        with Locations((-22.018232387, -10)):
            Circle(SKETCH25_R)
    extrude(amount=CUT_EXTRUDE9_DEPTH, mode=Mode.SUBTRACT)

    # Sketch26 → Boss-Extrude15 (add)
    with BuildSketch(Plane.XZ.offset(8.25)):
        Polygon((-38.25, 34), (-63.25, 34), (-63.25, -16), (-38.25, -16), (-38.25, -14), (-61.25, -14), (-61.25, 32), (-38.25, 32), align=None)
    extrude(amount=-BOSS_EXTRUDE15_DEPTH)

    # Sketch27 → Boss-Extrude16 (add)
    with BuildSketch(Plane.XZ.offset(8.25)):
        with Locations((-36.25, 9)):
            Rectangle(SKETCH27_W, SKETCH27_H)
        with Locations(Location((-36.25, 6, 0), (0, 0, 270))):
            Circle(SKETCH27_R, mode=Mode.SUBTRACT)
        with Locations(Location((-36.25, 12, 0), (0, 0, 270))):
            Circle(SKETCH27_R, mode=Mode.SUBTRACT)
    extrude(amount=-BOSS_EXTRUDE16_DEPTH)

    # Sketch28 → Cut-Extrude10 (cut)
    with BuildSketch(Plane.XZ.offset(8.25)):
        with Locations((-50.75, -16)):
            Circle(SKETCH28_R)
        with Locations((-50.75, 34)):
            Circle(SKETCH28_R)
    extrude(amount=-CUT_EXTRUDE10_DEPTH, mode=Mode.SUBTRACT)

    # Sketch29 → Boss-Extrude17 (add)
    with BuildSketch(Plane.XZ.offset(8.25)):
        with BuildLine():
            Line((-55.239729053, -15.696136494), (-53.176562378, -15.398506004))
            ThreePointArc((-53.176562378, -15.398506004), (-50.75, -18.5), (-48.323437622, -15.398506004))
            Line((-48.323437622, -15.398506004), (-46.290380625, -15.398506004))
            ThreePointArc((-46.290380625, -15.398506004), (-50.600425185, -20.497513466), (-55.239729053, -15.696136494))
        make_face()
        with BuildLine():
            Line((-55.239729053, 33.696136494), (-53.231464682, 33.696136494))
            ThreePointArc((-53.231464682, 33.696136494), (-50.75, 36.5), (-48.268535318, 33.696136494))
            Line((-48.268535318, 33.696136494), (-46.283363572, 33.453045689))
            ThreePointArc((-46.283363572, 33.453045689), (-50.627907403, 38.498343406), (-55.239729053, 33.696136494))
        make_face()
    extrude(amount=-BOSS_EXTRUDE17_DEPTH)

    # Sketch30 → Cut-Extrude11 (cut)
    with BuildSketch(Plane(origin=(0, 3.75, 0), x_dir=(1, 0, 0), z_dir=(0, 1, 0))):
        with Locations(Location((-50.75, 16, 0), (0, 0, 313.341758227))):
            Circle(SKETCH30_R)
        with Locations(Location((-50.75, -34, 0), (0, 0, 133.341758227))):
            Circle(SKETCH30_R)
    extrude(amount=-CUT_EXTRUDE11_DEPTH, mode=Mode.SUBTRACT)

    # Sketch31 → Cut-Extrude12 (cut)
    with BuildSketch(Plane(origin=(0, 3.75, 0), x_dir=(1, 0, 0), z_dir=(0, 1, 0))):
        with Locations(Location((-36.25, -31, 0), (0, 0, 270))):
            Circle(SKETCH31_R)
        with Locations(Location((-36.25, 13, 0), (0, 0, 270))):
            Circle(SKETCH31_R)
    extrude(amount=-CUT_EXTRUDE12_DEPTH, mode=Mode.SUBTRACT)


solid = part_3.part
